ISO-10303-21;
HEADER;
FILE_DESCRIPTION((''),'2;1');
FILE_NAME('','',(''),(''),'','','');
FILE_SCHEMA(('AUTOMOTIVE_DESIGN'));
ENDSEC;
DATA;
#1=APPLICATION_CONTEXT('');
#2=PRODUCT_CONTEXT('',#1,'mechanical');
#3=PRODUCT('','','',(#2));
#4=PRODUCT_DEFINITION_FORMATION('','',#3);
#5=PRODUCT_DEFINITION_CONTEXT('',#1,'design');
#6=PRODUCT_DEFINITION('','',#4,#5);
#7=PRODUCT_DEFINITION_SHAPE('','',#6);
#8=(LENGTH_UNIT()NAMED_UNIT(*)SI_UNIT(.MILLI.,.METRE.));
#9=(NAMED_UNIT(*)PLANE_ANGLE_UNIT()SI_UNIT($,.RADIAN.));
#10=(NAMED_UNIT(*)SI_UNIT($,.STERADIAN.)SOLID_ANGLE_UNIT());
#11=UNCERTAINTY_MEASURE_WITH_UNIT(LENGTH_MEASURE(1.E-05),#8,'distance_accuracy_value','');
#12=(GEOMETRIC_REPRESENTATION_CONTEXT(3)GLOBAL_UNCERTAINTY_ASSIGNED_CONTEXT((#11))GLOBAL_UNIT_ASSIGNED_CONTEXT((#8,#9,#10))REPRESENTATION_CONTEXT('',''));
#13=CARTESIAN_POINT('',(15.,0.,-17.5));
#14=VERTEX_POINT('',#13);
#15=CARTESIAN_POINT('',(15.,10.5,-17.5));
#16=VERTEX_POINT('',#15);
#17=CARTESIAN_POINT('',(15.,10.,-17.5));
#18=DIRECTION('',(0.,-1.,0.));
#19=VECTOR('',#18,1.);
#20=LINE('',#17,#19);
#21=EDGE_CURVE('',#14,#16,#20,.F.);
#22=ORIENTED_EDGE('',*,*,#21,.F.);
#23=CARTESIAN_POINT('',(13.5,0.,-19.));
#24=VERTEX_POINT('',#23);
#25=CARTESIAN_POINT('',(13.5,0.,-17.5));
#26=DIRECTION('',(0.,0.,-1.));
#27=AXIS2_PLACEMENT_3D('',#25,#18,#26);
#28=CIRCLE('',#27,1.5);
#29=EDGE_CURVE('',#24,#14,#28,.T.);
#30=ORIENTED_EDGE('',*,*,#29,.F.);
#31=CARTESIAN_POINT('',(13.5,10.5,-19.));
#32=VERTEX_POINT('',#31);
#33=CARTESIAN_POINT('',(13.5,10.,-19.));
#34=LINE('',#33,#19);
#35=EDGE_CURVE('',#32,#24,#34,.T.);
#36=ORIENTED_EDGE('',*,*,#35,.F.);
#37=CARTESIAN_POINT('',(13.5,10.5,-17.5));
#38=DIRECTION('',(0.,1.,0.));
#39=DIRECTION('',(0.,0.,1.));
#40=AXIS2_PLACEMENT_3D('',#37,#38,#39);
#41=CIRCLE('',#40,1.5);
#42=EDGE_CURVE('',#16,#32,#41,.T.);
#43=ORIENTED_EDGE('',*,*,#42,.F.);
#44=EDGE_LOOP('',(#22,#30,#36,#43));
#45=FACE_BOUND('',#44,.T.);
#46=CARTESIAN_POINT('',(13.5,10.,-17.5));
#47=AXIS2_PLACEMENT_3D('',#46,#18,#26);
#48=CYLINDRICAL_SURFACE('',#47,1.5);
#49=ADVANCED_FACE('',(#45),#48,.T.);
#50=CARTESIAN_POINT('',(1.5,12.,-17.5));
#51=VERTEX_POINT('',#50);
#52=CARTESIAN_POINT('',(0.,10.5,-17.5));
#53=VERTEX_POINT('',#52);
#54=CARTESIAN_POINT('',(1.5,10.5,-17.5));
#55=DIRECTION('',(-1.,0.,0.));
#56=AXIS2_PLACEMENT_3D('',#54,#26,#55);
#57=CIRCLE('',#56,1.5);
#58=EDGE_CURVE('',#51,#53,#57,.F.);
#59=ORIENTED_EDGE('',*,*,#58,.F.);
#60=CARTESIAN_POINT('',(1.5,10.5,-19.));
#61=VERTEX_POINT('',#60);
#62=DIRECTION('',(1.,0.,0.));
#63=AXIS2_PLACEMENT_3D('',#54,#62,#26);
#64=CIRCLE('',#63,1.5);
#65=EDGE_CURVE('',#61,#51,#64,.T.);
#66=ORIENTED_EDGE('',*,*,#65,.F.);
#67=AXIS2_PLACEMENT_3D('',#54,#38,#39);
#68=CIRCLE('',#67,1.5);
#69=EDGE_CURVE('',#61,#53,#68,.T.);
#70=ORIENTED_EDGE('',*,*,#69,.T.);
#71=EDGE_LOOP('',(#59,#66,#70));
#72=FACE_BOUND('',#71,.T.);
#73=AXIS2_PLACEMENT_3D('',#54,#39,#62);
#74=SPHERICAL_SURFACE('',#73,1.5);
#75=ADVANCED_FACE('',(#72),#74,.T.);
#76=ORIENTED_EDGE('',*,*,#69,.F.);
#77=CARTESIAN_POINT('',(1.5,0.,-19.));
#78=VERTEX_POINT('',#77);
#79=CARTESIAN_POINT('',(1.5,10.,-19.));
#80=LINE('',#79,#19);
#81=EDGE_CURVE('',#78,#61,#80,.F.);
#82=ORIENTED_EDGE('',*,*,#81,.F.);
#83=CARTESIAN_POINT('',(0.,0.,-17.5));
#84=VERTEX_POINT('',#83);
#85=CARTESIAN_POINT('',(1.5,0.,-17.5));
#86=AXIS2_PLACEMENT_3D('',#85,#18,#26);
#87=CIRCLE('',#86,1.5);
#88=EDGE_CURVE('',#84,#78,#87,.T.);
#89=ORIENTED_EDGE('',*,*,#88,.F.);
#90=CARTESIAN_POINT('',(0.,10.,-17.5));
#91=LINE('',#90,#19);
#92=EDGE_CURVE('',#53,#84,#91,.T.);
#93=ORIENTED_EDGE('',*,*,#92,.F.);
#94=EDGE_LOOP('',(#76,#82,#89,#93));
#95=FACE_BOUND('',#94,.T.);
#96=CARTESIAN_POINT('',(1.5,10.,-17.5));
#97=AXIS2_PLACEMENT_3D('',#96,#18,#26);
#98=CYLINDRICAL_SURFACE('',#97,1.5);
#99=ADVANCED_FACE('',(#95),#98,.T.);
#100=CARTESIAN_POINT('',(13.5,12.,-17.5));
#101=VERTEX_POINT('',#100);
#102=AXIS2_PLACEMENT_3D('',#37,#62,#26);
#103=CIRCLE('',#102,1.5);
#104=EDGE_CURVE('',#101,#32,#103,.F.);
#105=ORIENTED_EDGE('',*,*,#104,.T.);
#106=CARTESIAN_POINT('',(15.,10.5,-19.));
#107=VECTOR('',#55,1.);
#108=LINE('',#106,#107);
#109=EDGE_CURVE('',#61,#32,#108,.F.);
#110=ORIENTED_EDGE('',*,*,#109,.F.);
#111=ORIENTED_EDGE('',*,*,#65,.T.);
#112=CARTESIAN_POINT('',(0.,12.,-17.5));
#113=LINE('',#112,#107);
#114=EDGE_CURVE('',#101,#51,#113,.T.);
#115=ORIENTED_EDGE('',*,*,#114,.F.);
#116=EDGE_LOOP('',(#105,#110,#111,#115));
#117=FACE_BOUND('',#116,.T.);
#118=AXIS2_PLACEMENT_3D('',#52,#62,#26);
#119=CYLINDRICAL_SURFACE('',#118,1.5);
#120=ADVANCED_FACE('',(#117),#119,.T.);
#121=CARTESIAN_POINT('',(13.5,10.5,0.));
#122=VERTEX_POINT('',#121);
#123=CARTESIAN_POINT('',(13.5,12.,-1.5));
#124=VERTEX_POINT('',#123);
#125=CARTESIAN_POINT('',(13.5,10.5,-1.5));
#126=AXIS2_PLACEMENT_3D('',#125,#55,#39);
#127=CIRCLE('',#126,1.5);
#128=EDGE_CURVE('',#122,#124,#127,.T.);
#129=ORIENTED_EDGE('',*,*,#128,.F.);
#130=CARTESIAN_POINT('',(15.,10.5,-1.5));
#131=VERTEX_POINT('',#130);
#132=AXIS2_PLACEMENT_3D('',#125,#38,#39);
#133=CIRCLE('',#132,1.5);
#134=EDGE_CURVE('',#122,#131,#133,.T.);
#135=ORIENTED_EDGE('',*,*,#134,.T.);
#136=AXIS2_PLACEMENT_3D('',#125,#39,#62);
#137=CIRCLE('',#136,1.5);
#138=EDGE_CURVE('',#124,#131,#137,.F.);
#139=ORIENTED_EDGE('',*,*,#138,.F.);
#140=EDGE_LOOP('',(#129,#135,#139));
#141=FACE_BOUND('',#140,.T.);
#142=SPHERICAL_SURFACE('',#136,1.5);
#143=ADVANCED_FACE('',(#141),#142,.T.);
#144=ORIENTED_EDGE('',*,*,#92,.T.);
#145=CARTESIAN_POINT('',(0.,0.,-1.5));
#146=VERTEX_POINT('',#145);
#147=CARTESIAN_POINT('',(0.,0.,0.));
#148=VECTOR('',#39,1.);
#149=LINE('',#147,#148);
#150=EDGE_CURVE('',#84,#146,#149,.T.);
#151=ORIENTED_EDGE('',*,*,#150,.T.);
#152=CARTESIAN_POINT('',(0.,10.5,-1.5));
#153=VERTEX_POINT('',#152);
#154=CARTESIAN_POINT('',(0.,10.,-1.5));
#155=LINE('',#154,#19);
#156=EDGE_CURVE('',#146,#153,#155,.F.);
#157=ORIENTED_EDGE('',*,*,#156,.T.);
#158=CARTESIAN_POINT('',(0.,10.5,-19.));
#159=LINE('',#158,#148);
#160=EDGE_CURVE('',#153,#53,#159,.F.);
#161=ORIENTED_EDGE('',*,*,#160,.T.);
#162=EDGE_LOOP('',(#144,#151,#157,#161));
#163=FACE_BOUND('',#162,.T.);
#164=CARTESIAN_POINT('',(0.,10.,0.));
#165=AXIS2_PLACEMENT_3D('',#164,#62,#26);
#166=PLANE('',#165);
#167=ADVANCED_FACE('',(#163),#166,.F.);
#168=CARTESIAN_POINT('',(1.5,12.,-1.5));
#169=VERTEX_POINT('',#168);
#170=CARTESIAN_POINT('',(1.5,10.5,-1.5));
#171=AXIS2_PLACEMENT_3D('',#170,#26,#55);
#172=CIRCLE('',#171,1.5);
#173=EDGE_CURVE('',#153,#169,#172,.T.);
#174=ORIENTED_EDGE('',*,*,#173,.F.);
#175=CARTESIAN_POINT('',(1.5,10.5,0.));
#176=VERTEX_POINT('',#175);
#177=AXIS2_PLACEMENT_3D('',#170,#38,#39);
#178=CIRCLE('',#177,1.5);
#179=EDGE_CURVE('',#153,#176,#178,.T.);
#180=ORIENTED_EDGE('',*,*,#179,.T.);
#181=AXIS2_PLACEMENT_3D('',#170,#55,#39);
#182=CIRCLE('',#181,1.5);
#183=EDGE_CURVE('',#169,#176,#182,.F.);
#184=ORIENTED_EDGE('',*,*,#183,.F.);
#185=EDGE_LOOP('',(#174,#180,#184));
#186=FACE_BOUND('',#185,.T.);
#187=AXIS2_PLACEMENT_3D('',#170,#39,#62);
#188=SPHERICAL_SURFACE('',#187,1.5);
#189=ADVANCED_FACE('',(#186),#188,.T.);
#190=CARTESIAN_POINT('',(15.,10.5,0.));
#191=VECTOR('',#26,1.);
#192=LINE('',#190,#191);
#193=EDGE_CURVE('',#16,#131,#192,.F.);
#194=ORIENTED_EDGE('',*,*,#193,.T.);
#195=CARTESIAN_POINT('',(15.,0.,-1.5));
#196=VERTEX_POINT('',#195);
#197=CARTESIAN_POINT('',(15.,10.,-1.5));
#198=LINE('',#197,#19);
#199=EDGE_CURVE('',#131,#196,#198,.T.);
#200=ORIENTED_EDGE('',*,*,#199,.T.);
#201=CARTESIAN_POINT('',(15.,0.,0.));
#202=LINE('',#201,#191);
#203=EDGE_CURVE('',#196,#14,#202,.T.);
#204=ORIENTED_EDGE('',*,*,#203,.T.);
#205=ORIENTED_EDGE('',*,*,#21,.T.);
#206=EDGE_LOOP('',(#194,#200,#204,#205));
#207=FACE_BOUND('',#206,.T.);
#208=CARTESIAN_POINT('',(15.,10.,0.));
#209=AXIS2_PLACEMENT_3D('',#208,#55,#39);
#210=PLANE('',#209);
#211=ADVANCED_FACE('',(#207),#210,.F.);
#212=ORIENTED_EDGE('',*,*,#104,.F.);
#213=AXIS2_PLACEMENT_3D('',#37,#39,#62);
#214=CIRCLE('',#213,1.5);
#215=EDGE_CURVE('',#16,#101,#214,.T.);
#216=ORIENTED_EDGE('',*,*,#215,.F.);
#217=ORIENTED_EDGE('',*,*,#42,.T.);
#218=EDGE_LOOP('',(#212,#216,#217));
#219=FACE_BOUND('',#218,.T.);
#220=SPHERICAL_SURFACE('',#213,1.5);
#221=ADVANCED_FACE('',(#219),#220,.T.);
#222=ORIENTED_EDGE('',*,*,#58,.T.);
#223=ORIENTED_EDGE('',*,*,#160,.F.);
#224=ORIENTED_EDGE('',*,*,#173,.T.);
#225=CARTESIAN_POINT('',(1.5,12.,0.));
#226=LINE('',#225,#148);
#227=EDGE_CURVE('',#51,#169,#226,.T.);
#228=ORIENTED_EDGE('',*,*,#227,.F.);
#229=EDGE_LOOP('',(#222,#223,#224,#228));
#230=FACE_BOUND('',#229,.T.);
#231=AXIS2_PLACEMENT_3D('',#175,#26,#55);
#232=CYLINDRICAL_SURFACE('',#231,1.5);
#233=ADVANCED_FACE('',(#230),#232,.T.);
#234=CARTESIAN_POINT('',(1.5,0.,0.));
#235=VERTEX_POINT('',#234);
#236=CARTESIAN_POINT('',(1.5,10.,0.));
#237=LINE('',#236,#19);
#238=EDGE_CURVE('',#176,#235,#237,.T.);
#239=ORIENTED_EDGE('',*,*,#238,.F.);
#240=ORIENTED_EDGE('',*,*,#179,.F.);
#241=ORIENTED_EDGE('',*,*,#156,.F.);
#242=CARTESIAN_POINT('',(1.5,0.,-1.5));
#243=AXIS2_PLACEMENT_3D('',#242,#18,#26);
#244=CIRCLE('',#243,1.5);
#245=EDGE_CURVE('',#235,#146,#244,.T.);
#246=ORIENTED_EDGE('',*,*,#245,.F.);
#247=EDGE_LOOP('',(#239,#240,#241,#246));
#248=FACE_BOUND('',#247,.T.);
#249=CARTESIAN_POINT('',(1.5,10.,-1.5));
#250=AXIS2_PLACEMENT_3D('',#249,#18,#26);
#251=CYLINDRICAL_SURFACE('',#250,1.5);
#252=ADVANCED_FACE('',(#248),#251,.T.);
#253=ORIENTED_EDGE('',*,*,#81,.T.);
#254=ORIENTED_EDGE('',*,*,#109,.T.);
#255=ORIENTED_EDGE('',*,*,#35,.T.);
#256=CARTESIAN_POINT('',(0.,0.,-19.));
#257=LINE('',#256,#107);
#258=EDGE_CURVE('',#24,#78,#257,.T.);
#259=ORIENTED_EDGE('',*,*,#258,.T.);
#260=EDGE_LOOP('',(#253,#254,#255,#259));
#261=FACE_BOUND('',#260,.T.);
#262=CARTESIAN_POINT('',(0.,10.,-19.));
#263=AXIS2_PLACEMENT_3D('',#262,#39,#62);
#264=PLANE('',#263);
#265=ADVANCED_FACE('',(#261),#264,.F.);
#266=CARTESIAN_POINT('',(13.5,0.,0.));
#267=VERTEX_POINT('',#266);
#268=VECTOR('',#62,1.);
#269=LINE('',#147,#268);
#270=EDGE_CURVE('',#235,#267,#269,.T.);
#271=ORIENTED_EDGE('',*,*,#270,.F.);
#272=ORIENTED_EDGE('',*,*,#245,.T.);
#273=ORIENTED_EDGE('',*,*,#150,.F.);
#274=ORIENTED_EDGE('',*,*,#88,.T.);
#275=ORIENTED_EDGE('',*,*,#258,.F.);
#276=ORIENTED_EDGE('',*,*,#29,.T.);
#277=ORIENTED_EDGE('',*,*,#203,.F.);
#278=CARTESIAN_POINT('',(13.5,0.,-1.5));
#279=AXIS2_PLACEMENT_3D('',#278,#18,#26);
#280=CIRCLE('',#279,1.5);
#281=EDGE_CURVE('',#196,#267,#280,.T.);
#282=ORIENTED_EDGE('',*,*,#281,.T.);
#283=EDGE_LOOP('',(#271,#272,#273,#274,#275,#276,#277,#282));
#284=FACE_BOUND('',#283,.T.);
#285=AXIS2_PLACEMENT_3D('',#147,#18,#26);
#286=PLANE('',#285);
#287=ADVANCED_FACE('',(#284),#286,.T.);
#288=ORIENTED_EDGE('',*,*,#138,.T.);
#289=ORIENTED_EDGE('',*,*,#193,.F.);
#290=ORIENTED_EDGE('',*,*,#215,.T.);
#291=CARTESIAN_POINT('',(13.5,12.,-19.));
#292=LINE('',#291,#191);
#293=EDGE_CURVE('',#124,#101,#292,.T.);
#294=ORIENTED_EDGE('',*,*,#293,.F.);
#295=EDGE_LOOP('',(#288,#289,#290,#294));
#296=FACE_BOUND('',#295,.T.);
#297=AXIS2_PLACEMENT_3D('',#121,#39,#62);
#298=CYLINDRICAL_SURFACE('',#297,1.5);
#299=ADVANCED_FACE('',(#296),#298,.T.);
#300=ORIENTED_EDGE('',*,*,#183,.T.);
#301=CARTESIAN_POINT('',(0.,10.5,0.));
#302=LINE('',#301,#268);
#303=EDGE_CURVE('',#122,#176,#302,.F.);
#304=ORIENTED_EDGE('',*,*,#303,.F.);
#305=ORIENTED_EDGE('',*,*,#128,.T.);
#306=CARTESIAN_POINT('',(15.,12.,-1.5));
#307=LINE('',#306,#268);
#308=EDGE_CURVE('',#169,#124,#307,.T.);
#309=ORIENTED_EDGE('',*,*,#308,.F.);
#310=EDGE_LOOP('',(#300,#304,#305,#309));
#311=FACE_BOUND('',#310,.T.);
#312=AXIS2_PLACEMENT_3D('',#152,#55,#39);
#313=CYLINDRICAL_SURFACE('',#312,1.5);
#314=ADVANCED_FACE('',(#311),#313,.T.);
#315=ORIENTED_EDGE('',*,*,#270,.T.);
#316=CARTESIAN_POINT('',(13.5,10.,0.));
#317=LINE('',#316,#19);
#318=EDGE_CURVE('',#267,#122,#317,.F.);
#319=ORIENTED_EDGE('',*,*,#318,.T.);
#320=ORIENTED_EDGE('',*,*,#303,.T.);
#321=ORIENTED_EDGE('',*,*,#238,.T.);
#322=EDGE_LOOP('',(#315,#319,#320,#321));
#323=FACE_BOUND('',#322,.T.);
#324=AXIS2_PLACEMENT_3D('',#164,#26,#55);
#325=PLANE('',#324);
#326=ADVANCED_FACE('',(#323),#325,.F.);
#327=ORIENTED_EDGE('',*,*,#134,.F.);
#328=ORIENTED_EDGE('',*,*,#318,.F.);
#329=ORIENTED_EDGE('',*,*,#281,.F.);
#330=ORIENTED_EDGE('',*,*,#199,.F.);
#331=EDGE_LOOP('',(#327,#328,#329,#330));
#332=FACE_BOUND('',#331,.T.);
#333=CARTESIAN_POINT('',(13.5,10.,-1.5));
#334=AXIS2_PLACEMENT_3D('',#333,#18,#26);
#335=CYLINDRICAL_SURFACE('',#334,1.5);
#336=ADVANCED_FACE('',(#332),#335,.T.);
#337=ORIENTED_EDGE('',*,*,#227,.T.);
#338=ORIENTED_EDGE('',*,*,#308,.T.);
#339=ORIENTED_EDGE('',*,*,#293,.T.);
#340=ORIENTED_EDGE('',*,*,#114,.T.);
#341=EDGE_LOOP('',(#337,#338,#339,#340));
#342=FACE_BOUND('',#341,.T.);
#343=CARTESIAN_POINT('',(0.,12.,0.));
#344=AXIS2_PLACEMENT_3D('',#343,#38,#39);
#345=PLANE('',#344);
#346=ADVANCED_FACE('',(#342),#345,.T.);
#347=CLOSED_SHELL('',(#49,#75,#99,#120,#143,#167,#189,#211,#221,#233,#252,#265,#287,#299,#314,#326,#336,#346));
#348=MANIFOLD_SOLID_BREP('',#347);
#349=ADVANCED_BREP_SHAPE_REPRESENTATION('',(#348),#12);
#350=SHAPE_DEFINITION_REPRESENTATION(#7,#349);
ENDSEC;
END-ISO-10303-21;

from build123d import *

# Parameters (mm, degrees)
SKETCH2_W           = 15
SKETCH2_H           = 19
BOSS_EXTRUDE1_DEPTH = 10
SKETCH3_W           = 15
SKETCH3_H           = 19
BOSS_EXTRUDE2_DEPTH = 2
FILLET1_R           = 1.5
FILLET3_R           = 1.5


with BuildPart() as part:
    # Sketch2 → Boss-Extrude1 (new body)
    with BuildSketch(Plane(origin=(0, 0, 0), x_dir=(1, 0, 0), z_dir=(0, 1, 0))):
        with Locations((7.5, 9.5)):
            Rectangle(SKETCH2_W, SKETCH2_H)
    extrude(amount=BOSS_EXTRUDE1_DEPTH)

    # Sketch3 → Boss-Extrude2 (add)
    with BuildSketch(Plane(origin=(0, 10, 0), x_dir=(1, 0, 0), z_dir=(0, 1, 0))):
        with Locations((7.5, 9.5)):
            Rectangle(SKETCH3_W, SKETCH3_H)
    extrude(amount=BOSS_EXTRUDE2_DEPTH)

    # Fillet1
    fillet1_edges = [part.edges().sort_by_distance(p)[0] for p in [
        (0, 12, -9.5),
        (7.5, 12, 0),
        (15, 12, -9.5),
        (7.5, 12, -19),
    ]]
    fillet(fillet1_edges, radius=FILLET1_R)

    # Fillet3
    # the kernel refuses this fillet: 1.5 mm, written as the material it takes off along each edge
    with BuildSketch(Plane(origin=(13.5, 10.5, -1.5), x_dir=(1, 0, 0), z_dir=(0, 0, 1))) as fillet3_piece_1_section:
        Polygon((0, 0), (FILLET3_R, 0), (FILLET3_R, FILLET3_R), (0, FILLET3_R), align=None)
    fillet3_piece_1 = extrude(amount=FILLET3_R, mode=Mode.PRIVATE)
    fillet3_piece_1 = fillet3_piece_1 - Plane(origin=(13.5, 10.5, -1.5), x_dir=(-0.7071067811865475, -0.7071067811865475, 0), z_dir=(0, 0, 1)) * Sphere(FILLET3_R, mode=Mode.PRIVATE)
    add(fillet3_piece_1, mode=Mode.SUBTRACT)
    with BuildSketch(Plane(origin=(1.5, 10.5, -1.5), x_dir=(-1, 0, 0), z_dir=(0, 0, 1))) as fillet3_piece_2_section:
        Polygon((0, 0), (FILLET3_R, 0), (FILLET3_R, -FILLET3_R), (0, -FILLET3_R), align=None)
    fillet3_piece_2 = extrude(amount=FILLET3_R, mode=Mode.PRIVATE)
    fillet3_piece_2 = fillet3_piece_2 - Plane(origin=(1.5, 10.5, -1.5), x_dir=(0.7071067811865475, -0.7071067811865475, 0), z_dir=(0, 0, 1)) * Sphere(FILLET3_R, mode=Mode.PRIVATE)
    add(fillet3_piece_2, mode=Mode.SUBTRACT)
    with BuildSketch(Plane(origin=(13.5, 10.5, -17.5), x_dir=(0, 0, -1), z_dir=(1, 0, 0))) as fillet3_piece_3_section:
        Polygon((0, 0), (FILLET3_R, 0), (FILLET3_R, FILLET3_R), (0, FILLET3_R), align=None)
    fillet3_piece_3 = extrude(amount=FILLET3_R, mode=Mode.PRIVATE)
    fillet3_piece_3 = fillet3_piece_3 - Plane(origin=(13.5, 10.5, -17.5), x_dir=(0, -0.7071067811865475, 0.7071067811865475), z_dir=(1, 0, 0)) * Sphere(FILLET3_R, mode=Mode.PRIVATE)
    add(fillet3_piece_3, mode=Mode.SUBTRACT)
    with BuildSketch(Plane(origin=(1.5, 10.5, -17.5), x_dir=(0, 0, -1), z_dir=(-1, 0, 0))) as fillet3_piece_4_section:
        Polygon((0, 0), (FILLET3_R, 0), (FILLET3_R, -FILLET3_R), (0, -FILLET3_R), align=None)
    fillet3_piece_4 = extrude(amount=FILLET3_R, mode=Mode.PRIVATE)
    fillet3_piece_4 = fillet3_piece_4 - Plane(origin=(1.5, 10.5, -17.5), x_dir=(0, -0.7071067811865475, 0.7071067811865475), z_dir=(-1, 0, 0)) * Sphere(FILLET3_R, mode=Mode.PRIVATE)
    add(fillet3_piece_4, mode=Mode.SUBTRACT)
    with BuildSketch(Plane(origin=(0, 10.5, -19), x_dir=(0, 0, 1), z_dir=(0, -1, 0)), Plane(origin=(15, -3.75, -19), x_dir=(0, 0, 1), z_dir=(0, 1, 0)), Plane(origin=(15, -3.75, 0), x_dir=(-1, 0, 0), z_dir=(0, 1, 0)), Plane(origin=(0, 10.5, 0), x_dir=(1, 0, 0), z_dir=(0, -1, 0))) as fillet3_piece_5:
        with BuildLine():
            CenterArc((FILLET3_R, -FILLET3_R), FILLET3_R, 90, 90)
            Line((0, -FILLET3_R), (0, 0))
            Line((0, 0), (FILLET3_R, 0))
        make_face()
    extrude(amount=14.25, mode=Mode.SUBTRACT)


solid = part.part
